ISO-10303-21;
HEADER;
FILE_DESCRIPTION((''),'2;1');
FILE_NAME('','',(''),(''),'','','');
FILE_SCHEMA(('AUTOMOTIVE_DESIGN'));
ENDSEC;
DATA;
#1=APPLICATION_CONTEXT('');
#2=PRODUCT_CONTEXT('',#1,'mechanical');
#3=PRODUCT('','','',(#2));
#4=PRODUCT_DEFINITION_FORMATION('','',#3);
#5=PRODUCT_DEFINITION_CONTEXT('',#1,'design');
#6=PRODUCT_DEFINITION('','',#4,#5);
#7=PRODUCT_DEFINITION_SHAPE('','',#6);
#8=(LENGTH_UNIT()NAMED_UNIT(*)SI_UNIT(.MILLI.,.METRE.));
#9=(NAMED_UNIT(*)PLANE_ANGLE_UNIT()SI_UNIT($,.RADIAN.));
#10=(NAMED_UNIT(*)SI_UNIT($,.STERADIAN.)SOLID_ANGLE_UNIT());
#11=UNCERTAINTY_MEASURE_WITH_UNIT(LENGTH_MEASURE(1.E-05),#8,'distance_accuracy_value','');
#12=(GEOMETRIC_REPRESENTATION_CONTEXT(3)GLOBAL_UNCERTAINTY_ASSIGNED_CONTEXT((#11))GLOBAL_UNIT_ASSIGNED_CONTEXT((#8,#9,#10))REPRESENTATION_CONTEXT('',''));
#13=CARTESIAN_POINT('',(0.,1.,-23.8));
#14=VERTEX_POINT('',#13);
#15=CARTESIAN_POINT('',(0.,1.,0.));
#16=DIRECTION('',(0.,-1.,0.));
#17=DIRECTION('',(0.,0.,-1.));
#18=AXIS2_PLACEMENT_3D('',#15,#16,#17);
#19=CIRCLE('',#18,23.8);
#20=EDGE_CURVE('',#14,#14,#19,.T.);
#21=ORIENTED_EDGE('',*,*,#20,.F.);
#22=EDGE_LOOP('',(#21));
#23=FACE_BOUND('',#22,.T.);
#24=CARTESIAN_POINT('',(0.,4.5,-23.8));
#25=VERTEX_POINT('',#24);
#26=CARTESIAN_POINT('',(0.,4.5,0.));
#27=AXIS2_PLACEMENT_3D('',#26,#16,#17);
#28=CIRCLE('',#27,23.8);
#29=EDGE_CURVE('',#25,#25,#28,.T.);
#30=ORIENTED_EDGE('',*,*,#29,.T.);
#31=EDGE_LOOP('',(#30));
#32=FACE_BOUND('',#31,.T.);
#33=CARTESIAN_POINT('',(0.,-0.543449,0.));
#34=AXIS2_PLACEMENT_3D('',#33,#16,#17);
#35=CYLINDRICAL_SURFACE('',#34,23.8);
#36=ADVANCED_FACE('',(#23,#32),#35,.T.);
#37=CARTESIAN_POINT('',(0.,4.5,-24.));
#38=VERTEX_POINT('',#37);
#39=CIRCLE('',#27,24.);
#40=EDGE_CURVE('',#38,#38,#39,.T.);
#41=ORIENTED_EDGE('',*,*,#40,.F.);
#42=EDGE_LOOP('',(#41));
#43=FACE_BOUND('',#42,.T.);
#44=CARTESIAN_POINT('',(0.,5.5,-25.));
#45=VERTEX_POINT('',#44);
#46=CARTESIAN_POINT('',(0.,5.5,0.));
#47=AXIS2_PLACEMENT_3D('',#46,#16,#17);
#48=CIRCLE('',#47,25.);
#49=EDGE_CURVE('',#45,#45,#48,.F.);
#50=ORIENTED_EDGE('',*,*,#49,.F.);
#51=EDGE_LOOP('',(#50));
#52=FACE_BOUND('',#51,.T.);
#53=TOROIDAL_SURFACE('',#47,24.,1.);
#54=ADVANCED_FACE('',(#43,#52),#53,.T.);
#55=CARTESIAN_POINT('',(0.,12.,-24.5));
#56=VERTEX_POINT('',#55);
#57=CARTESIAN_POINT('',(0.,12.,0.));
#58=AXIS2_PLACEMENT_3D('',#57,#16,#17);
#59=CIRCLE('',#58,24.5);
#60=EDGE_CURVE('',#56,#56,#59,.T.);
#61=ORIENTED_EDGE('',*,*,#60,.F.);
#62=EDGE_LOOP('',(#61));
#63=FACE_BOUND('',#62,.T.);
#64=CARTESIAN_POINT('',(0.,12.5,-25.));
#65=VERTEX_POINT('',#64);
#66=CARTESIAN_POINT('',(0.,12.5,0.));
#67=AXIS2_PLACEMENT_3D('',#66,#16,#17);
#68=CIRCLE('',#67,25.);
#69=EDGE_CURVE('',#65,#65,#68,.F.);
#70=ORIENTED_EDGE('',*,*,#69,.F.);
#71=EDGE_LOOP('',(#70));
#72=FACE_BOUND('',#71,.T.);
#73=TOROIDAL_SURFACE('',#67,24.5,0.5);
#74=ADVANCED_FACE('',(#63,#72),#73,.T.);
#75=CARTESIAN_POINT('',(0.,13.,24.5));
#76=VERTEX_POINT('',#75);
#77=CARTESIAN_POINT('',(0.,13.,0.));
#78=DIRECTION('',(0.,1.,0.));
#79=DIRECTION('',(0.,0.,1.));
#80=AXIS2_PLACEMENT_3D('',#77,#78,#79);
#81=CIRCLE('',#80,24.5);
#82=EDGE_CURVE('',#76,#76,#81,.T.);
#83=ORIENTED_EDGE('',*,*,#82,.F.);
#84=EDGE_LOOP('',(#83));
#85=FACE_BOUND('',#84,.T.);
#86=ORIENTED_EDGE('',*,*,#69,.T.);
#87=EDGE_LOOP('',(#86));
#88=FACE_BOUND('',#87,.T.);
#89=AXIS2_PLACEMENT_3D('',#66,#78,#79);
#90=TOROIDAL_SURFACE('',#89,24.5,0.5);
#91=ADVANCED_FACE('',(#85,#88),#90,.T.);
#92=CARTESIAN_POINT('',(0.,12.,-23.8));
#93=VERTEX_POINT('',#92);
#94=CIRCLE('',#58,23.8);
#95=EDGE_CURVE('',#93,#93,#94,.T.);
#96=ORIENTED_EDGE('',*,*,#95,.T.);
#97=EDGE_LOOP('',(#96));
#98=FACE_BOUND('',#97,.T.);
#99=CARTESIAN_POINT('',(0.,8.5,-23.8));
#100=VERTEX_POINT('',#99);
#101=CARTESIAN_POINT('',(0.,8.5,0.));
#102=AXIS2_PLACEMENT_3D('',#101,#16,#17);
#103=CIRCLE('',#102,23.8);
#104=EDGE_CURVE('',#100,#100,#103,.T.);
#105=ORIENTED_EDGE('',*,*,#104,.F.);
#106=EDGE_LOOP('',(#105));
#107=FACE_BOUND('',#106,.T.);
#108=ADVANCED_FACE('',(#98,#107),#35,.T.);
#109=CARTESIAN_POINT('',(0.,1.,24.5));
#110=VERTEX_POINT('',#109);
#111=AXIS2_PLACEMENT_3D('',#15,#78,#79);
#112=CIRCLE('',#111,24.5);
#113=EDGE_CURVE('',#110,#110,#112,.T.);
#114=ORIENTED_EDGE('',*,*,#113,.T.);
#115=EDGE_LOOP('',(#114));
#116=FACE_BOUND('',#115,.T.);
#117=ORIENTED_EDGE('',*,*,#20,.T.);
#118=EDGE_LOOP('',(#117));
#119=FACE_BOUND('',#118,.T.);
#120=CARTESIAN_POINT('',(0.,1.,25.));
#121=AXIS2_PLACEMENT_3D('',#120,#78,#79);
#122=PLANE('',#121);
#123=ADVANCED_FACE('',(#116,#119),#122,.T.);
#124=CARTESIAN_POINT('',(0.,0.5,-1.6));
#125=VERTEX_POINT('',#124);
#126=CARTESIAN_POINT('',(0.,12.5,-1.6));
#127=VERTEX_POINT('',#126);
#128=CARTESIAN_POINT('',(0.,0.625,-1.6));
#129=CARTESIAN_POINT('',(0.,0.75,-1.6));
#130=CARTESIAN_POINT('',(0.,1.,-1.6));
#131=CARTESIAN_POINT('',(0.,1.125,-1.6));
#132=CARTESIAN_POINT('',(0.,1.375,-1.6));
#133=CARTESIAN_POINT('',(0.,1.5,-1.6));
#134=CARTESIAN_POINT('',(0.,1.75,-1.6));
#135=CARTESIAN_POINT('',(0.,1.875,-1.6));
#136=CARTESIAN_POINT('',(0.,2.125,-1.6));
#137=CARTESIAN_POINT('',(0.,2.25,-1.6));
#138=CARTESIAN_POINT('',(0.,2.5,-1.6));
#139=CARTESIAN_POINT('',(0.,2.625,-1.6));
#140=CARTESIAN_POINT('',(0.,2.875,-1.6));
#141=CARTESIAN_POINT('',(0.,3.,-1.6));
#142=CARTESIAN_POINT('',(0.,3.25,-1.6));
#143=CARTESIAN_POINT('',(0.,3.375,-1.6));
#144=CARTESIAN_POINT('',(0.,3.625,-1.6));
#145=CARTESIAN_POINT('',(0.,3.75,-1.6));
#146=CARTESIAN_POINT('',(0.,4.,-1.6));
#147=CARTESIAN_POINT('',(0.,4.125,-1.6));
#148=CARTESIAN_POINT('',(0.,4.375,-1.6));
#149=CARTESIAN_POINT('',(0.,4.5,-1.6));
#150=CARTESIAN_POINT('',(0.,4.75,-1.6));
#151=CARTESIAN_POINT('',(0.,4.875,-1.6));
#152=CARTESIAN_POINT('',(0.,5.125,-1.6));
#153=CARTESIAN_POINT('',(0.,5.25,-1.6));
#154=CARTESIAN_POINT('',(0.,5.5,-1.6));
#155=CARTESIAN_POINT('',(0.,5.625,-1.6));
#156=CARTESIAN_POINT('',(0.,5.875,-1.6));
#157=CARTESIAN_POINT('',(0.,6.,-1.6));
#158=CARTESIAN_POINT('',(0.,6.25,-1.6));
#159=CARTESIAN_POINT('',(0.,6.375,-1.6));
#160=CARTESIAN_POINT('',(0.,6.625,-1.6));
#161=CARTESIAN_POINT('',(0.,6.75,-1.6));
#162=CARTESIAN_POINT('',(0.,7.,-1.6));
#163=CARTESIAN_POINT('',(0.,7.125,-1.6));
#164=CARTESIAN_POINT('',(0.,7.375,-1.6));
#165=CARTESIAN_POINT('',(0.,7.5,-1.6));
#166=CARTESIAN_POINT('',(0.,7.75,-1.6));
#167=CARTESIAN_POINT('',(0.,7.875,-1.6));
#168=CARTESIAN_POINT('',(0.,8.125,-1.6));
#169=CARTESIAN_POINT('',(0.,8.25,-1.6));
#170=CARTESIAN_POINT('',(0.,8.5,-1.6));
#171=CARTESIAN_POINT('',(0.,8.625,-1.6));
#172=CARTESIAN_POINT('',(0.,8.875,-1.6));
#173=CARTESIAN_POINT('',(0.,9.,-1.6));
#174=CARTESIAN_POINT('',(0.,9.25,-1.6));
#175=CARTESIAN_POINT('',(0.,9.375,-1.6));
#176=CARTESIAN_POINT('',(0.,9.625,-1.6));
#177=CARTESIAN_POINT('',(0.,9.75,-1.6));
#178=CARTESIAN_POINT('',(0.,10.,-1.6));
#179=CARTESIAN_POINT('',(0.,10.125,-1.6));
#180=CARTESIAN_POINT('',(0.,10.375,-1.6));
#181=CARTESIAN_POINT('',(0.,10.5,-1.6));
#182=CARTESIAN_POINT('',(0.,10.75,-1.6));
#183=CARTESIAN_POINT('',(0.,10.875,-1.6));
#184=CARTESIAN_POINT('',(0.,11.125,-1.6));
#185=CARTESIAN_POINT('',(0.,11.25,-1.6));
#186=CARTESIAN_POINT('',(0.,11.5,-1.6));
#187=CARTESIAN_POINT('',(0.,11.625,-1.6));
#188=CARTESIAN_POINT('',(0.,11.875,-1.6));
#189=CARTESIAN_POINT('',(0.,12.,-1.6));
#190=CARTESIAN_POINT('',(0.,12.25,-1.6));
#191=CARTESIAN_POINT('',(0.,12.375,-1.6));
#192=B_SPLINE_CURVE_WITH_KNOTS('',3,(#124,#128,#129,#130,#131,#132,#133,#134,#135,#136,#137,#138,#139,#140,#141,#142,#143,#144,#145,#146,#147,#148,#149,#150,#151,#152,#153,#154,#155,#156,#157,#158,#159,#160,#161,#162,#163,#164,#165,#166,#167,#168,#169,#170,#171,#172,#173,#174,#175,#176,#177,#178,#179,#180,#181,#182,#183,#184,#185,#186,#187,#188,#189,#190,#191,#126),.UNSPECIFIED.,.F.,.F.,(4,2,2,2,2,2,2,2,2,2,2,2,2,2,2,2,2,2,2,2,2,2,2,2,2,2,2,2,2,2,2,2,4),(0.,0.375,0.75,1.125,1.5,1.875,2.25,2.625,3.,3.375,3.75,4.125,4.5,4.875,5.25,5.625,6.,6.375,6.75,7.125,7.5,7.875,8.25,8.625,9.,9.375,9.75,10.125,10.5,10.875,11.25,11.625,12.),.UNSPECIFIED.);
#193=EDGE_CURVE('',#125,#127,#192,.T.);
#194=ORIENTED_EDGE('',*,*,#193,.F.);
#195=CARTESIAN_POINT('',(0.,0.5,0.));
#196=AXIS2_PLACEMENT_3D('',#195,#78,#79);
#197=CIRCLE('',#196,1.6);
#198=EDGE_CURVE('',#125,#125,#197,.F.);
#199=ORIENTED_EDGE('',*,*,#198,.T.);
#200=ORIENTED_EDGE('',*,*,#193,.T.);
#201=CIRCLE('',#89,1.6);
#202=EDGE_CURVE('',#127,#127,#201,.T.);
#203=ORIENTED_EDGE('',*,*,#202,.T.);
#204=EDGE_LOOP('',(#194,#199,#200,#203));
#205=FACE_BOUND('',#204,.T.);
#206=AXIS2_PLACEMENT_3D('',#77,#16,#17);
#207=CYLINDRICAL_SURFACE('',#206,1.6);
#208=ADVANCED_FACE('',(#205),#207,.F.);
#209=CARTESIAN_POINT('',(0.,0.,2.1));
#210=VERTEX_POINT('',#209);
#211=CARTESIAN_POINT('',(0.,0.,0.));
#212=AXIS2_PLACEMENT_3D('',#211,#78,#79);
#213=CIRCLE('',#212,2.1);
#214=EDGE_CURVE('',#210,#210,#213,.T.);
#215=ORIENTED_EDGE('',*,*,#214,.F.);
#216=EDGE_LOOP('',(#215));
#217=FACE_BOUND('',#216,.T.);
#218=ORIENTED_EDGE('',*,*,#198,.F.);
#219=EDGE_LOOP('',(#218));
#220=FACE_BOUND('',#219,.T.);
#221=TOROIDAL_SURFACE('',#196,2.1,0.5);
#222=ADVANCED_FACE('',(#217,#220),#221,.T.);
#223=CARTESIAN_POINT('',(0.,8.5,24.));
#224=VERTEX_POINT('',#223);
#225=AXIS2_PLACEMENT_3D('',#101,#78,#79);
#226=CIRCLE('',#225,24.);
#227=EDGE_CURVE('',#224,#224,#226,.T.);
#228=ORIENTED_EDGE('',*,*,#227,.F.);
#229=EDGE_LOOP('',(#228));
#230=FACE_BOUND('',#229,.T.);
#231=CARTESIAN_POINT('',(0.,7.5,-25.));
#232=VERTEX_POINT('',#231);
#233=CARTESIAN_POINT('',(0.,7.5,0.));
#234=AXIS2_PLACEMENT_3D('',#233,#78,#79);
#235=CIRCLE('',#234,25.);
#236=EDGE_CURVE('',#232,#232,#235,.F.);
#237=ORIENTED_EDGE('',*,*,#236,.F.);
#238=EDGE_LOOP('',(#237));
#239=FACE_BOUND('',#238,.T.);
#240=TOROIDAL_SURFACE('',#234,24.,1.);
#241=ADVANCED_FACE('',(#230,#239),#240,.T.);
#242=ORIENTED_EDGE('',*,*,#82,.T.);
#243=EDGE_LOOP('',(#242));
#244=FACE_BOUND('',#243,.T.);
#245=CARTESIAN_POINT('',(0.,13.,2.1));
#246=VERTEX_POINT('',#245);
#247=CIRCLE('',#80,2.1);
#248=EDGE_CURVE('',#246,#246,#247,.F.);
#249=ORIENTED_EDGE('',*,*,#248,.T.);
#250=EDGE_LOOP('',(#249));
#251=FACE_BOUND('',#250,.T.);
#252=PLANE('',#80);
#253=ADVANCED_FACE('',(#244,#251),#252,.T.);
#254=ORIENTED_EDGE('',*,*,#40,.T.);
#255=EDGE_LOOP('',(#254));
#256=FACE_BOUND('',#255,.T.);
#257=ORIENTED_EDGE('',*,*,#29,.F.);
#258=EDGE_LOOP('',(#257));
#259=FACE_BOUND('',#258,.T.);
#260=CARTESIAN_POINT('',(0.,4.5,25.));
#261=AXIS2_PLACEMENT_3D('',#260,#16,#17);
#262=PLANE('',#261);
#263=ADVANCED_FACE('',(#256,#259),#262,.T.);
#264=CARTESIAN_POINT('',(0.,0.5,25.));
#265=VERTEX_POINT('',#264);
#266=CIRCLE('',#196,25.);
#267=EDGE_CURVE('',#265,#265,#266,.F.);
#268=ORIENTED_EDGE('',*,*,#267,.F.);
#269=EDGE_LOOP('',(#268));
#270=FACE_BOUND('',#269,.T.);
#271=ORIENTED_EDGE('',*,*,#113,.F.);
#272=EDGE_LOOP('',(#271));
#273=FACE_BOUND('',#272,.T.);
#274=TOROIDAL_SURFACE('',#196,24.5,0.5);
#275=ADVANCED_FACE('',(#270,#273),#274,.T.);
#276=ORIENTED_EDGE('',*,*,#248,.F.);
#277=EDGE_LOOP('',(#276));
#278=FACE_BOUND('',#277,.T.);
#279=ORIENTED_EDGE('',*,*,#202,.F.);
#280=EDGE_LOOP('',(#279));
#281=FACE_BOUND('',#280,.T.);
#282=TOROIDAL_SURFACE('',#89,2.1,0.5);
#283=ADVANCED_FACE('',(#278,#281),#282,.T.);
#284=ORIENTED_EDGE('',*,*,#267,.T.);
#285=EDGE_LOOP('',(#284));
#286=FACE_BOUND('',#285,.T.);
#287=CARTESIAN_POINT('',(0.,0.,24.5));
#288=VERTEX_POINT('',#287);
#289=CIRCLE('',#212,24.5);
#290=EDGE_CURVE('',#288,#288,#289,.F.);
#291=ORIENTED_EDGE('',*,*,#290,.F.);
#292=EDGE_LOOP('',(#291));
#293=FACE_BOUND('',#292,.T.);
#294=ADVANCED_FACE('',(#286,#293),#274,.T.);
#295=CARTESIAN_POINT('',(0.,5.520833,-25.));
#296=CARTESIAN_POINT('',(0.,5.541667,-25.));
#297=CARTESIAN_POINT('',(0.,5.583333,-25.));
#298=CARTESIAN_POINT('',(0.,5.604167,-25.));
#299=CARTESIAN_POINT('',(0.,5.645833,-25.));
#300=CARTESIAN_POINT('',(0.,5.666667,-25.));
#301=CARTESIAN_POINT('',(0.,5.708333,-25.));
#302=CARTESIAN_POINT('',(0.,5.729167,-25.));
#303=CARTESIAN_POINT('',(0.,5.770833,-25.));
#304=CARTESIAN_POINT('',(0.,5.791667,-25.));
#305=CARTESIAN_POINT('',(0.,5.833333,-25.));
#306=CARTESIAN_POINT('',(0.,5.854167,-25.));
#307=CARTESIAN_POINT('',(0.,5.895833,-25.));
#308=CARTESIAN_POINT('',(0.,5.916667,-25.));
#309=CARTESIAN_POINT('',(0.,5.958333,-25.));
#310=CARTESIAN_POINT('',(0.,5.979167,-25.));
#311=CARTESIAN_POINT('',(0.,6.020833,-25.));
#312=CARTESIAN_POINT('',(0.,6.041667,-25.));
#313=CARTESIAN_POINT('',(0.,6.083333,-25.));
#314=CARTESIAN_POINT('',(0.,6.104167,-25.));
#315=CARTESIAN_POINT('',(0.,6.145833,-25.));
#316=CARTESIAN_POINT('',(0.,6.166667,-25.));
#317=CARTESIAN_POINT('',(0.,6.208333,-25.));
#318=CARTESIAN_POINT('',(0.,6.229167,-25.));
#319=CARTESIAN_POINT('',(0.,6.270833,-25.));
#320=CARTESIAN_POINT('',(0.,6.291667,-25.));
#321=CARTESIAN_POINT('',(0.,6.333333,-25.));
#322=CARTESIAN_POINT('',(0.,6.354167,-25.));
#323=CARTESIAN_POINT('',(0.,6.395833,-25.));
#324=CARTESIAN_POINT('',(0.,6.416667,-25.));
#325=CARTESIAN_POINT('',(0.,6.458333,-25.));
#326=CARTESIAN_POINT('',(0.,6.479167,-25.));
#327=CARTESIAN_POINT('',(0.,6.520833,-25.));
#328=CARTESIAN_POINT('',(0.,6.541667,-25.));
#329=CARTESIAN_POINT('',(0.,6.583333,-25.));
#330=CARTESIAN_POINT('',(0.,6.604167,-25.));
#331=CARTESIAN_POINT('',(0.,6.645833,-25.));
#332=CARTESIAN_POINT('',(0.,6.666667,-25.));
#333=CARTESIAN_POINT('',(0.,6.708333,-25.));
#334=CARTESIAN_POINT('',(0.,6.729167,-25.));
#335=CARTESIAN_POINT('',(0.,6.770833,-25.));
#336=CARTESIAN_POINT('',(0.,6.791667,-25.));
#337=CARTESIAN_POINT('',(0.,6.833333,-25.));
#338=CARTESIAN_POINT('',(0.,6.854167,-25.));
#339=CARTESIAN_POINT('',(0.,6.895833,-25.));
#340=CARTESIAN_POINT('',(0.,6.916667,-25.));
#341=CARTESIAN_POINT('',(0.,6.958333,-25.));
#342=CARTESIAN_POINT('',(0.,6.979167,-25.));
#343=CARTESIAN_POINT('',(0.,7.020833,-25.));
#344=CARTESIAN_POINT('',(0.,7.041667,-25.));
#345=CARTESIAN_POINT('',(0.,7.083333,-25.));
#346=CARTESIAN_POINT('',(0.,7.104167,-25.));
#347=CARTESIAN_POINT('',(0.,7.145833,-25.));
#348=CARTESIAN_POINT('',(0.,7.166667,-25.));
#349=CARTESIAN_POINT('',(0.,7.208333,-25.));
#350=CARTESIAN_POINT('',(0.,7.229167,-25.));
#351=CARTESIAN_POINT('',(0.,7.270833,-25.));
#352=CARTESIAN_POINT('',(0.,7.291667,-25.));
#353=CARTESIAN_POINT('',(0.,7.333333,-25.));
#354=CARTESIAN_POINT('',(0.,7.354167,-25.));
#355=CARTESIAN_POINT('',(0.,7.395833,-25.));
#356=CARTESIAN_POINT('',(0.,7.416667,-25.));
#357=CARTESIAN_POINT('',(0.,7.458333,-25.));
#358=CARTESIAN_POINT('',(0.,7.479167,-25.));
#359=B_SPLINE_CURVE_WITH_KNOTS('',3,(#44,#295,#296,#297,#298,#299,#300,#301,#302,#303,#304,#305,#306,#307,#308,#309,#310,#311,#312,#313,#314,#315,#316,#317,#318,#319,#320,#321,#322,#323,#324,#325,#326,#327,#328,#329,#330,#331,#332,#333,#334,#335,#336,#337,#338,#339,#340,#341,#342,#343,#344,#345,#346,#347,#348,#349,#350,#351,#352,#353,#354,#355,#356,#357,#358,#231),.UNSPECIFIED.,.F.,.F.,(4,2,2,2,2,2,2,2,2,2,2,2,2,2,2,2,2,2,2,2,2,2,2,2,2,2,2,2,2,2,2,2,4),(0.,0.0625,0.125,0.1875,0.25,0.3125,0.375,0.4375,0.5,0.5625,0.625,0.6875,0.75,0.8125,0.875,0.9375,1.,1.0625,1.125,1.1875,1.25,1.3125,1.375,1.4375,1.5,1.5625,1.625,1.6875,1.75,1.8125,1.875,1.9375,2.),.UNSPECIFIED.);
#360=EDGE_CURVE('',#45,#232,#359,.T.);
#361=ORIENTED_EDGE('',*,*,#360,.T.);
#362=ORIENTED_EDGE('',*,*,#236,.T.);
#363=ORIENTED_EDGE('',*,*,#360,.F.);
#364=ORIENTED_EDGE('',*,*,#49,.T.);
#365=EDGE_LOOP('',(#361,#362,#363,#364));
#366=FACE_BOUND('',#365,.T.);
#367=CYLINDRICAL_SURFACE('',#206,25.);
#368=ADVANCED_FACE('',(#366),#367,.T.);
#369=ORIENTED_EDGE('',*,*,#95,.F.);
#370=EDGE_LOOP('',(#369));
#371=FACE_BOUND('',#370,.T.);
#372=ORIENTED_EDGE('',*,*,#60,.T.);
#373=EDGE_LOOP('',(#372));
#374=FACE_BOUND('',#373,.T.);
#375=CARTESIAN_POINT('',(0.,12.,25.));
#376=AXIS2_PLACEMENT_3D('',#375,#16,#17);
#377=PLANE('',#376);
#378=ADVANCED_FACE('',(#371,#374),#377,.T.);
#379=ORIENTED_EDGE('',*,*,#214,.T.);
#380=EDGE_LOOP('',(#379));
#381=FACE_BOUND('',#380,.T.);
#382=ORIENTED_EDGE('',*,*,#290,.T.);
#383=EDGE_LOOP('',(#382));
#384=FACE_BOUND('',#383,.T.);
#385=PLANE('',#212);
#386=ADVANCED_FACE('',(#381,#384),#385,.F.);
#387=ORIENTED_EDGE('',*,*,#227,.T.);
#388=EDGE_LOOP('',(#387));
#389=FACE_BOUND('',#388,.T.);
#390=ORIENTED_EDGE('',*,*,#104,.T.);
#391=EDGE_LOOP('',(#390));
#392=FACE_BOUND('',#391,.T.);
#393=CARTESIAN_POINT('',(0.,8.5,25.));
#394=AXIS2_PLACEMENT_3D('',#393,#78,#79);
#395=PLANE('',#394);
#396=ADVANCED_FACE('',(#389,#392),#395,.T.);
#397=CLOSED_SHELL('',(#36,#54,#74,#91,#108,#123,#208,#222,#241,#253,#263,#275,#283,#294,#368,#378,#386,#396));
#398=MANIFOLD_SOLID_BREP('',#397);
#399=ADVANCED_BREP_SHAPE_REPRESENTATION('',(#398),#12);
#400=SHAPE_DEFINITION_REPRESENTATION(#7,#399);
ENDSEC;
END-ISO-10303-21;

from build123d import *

# Parameters (mm, degrees)
SKETCH1_R           = 25
SKETCH1_R_2         = 1.6
BOSS_EXTRUDE1_DEPTH = 13
SKETCH3_W           = 1.2
SKETCH3_H           = 3.5
FILLET1_R           = 1
FILLET2_R           = 0.5
FILLET3_R           = 0.5
FILLET4_R           = 0.5


with BuildPart() as part:
    # Sketch1 → Boss-Extrude1 (new body)
    with BuildSketch(Plane(origin=(0, 0, 0), x_dir=(1, 0, 0), z_dir=(0, 1, 0))):
        with Locations(Location((0, 0, 0), (0, 0, 90))):
            Circle(SKETCH1_R)
        with Locations(Location((0, 0, 0), (0, 0, 90))):
            Circle(SKETCH1_R_2, mode=Mode.SUBTRACT)
    extrude(amount=BOSS_EXTRUDE1_DEPTH)

    # Sketch3 → Cut-Revolve1 (revolve, cut)
    with BuildSketch(Plane(origin=(0, 0, 0), x_dir=(0, 0, -1), z_dir=(1, 0, 0)), mode=Mode.PRIVATE) as cut_revolve1_sk:
        with Locations((-24.4, 10.25)):
            Rectangle(SKETCH3_W, SKETCH3_H)
        with Locations((-24.4, 2.75)):
            Rectangle(SKETCH3_W, SKETCH3_H)
    revolve(cut_revolve1_sk.sketch.rotate(Axis((0, -0.54344918, 0), (0, 1, 0)), 180), axis=Axis((0, -0.54344918, 0), (0, 1, 0)), mode=Mode.SUBTRACT)

    # Fillet1
    fillet1_edges = [part.edges().sort_by_distance(p)[0] for p in [
        (0, 8.5, 25),
        (0, 4.5, 25),
    ]]
    fillet(fillet1_edges, radius=FILLET1_R)

    # Fillet2
    fillet2_edges = [part.edges().sort_by_distance(p)[0] for p in [
        (0, 12, 25),
        (0, 1, 25),
    ]]
    fillet(fillet2_edges, radius=FILLET2_R)

    # Fillet3
    fillet3_edges = [part.edges().sort_by_distance(p)[0] for p in [
        (0, 0, 25),
        (0, 13, 25),
    ]]
    fillet(fillet3_edges, radius=FILLET3_R - 0.0001)  # a hair under: the kernel refuses the full size

    # Fillet4
    fillet4_edges = [part.edges().sort_by_distance(p)[0] for p in [
        (0, 0, 1.6),
        (0, 13, 1.6),
    ]]
    fillet(fillet4_edges, radius=FILLET4_R)


solid = part.part
